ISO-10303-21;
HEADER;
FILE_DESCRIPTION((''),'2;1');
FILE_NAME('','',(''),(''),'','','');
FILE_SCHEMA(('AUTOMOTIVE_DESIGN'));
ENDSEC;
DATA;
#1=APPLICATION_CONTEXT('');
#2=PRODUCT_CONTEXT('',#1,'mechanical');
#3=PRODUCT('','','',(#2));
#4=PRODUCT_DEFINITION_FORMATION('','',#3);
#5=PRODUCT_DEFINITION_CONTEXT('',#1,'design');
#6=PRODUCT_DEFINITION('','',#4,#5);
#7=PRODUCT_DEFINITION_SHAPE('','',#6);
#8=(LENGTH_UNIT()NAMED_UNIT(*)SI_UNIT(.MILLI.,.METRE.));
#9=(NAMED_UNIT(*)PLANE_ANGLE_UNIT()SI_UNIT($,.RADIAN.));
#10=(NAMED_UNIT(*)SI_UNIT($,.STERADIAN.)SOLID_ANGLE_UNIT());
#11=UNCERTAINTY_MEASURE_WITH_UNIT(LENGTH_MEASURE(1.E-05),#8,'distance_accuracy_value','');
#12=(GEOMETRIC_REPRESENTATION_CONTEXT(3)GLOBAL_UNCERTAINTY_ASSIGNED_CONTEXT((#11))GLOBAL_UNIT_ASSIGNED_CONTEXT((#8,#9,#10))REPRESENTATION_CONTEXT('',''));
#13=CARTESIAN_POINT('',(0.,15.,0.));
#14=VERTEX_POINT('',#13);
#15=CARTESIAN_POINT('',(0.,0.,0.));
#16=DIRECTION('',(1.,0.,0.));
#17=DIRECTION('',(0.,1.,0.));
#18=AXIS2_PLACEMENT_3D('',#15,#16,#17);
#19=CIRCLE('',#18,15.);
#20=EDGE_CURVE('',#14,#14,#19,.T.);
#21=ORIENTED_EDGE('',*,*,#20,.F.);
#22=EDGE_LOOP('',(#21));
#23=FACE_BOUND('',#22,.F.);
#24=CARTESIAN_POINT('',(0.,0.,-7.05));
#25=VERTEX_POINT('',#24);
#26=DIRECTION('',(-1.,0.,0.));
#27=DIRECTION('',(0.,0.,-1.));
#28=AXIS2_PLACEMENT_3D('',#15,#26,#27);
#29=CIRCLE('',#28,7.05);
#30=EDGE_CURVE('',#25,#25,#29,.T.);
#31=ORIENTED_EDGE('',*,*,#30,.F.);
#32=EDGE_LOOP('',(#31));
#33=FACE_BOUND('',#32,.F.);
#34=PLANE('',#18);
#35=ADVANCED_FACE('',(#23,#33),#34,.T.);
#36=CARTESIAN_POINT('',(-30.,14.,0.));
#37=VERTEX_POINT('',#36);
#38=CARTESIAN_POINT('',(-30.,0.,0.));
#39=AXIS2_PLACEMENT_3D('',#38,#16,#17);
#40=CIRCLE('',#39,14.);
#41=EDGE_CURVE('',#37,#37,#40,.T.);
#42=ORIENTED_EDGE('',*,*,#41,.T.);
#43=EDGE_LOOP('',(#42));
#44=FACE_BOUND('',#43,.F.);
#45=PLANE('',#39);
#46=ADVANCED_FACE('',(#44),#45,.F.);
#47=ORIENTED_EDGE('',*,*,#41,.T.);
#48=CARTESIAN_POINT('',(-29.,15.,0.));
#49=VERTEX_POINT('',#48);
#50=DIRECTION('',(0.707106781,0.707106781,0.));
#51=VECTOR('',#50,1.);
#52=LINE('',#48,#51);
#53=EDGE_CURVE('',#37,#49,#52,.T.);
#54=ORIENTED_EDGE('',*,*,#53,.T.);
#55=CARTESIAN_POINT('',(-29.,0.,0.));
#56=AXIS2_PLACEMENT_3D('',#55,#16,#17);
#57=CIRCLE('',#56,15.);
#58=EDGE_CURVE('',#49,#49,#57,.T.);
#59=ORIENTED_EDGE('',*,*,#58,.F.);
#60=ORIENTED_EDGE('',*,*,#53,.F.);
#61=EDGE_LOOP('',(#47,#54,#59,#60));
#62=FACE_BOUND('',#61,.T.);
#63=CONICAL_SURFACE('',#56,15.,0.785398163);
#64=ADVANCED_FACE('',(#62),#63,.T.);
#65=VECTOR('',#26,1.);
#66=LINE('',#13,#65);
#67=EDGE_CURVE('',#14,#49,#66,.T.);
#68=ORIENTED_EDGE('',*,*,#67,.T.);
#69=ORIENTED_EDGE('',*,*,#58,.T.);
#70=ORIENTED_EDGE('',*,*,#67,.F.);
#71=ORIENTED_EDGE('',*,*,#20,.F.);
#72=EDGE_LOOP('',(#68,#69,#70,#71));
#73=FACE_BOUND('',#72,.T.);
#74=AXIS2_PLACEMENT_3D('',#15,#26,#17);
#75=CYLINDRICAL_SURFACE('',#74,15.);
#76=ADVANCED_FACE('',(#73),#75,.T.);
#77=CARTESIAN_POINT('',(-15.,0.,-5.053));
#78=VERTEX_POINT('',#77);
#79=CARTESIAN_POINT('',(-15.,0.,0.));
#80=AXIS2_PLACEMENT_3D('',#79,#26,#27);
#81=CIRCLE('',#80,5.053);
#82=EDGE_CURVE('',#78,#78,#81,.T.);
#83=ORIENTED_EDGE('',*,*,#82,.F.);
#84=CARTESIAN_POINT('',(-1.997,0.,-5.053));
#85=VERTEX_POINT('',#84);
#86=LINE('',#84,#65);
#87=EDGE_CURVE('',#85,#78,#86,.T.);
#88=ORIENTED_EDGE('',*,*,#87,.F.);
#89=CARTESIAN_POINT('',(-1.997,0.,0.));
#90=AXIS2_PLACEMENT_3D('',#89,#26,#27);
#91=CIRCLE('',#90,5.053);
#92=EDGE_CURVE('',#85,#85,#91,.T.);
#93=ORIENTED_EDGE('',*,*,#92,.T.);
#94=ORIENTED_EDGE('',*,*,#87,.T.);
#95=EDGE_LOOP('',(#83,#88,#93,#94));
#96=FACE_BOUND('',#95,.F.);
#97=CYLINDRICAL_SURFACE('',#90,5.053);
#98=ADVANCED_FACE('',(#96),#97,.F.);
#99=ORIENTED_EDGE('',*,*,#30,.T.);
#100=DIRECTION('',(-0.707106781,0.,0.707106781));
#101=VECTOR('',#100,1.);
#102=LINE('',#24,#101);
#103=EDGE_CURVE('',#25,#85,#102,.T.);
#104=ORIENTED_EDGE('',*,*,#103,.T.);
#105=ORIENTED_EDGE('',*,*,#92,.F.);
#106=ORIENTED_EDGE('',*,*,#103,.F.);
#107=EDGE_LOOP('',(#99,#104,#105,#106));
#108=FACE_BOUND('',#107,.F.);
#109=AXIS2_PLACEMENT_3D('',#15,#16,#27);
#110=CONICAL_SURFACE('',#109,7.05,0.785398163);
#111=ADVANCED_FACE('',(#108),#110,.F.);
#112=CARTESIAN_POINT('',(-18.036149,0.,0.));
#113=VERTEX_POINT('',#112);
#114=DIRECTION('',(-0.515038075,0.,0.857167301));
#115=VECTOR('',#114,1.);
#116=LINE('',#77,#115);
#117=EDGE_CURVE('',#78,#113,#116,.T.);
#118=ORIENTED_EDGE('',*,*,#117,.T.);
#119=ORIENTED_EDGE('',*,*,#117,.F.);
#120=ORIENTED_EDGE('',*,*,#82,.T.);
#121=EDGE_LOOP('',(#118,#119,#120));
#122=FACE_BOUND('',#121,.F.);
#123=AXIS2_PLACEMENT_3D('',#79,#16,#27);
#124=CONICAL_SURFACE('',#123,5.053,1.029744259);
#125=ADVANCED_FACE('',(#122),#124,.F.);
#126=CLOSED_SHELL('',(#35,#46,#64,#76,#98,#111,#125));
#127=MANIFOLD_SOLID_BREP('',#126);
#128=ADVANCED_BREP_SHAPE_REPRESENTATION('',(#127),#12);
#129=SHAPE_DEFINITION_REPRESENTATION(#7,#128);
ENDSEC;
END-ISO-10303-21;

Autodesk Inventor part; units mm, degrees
ref_plane "YZ Plane" through (0, 0, 0) normal (1, 0, 0) x (0, 1, 0)
ref_plane "XZ Plane" through (0, 0, 0) normal (0, 1, 0) x (-1, 0, 0)
ref_plane "XY Plane" through (0, 0, 0) normal (0, 0, 1) x (1, 0, 0)
sketch "Sketch1" plane through (0, 0, 0) normal (0, 0, 1) x (1, 0, 0)
  line L0 (-36, 0) -> (6, 0) projected
  line L1 (0, -3) -> (0, 18) construction
  line L2 (0, 0) -> (0, 15)
  line L3 (0, 15) -> (-30, 15)
  line L4 (-30, 15) -> (-30, 0)
  dimension "d0" = 30
  dimension "d1" = 30
revolve "Revolution1" add sketch "Sketch1" angle 360 about axis through (-10, 0, 0) along (1, 0, 0)
sketch "Sketch2" plane through (0, 0, 0) normal (1, 0, 0) x (0, 0, -1)
  circle A0 centre (0, 0) radius 15 projected
hole "Hole1" at (0, 0, 0) direction (-1, 0, 0) diameter 10.106 depth 15 tip angle 118 countersink diameter 14.1 countersink angle 90 thread size "M12x1.75" class "6H" standard "ISO Metric profile"
chamfer "Chamfer1" distance 1 angle 45 1 edges at (-30, -15, 0)
properties part number "HM1-003X"
